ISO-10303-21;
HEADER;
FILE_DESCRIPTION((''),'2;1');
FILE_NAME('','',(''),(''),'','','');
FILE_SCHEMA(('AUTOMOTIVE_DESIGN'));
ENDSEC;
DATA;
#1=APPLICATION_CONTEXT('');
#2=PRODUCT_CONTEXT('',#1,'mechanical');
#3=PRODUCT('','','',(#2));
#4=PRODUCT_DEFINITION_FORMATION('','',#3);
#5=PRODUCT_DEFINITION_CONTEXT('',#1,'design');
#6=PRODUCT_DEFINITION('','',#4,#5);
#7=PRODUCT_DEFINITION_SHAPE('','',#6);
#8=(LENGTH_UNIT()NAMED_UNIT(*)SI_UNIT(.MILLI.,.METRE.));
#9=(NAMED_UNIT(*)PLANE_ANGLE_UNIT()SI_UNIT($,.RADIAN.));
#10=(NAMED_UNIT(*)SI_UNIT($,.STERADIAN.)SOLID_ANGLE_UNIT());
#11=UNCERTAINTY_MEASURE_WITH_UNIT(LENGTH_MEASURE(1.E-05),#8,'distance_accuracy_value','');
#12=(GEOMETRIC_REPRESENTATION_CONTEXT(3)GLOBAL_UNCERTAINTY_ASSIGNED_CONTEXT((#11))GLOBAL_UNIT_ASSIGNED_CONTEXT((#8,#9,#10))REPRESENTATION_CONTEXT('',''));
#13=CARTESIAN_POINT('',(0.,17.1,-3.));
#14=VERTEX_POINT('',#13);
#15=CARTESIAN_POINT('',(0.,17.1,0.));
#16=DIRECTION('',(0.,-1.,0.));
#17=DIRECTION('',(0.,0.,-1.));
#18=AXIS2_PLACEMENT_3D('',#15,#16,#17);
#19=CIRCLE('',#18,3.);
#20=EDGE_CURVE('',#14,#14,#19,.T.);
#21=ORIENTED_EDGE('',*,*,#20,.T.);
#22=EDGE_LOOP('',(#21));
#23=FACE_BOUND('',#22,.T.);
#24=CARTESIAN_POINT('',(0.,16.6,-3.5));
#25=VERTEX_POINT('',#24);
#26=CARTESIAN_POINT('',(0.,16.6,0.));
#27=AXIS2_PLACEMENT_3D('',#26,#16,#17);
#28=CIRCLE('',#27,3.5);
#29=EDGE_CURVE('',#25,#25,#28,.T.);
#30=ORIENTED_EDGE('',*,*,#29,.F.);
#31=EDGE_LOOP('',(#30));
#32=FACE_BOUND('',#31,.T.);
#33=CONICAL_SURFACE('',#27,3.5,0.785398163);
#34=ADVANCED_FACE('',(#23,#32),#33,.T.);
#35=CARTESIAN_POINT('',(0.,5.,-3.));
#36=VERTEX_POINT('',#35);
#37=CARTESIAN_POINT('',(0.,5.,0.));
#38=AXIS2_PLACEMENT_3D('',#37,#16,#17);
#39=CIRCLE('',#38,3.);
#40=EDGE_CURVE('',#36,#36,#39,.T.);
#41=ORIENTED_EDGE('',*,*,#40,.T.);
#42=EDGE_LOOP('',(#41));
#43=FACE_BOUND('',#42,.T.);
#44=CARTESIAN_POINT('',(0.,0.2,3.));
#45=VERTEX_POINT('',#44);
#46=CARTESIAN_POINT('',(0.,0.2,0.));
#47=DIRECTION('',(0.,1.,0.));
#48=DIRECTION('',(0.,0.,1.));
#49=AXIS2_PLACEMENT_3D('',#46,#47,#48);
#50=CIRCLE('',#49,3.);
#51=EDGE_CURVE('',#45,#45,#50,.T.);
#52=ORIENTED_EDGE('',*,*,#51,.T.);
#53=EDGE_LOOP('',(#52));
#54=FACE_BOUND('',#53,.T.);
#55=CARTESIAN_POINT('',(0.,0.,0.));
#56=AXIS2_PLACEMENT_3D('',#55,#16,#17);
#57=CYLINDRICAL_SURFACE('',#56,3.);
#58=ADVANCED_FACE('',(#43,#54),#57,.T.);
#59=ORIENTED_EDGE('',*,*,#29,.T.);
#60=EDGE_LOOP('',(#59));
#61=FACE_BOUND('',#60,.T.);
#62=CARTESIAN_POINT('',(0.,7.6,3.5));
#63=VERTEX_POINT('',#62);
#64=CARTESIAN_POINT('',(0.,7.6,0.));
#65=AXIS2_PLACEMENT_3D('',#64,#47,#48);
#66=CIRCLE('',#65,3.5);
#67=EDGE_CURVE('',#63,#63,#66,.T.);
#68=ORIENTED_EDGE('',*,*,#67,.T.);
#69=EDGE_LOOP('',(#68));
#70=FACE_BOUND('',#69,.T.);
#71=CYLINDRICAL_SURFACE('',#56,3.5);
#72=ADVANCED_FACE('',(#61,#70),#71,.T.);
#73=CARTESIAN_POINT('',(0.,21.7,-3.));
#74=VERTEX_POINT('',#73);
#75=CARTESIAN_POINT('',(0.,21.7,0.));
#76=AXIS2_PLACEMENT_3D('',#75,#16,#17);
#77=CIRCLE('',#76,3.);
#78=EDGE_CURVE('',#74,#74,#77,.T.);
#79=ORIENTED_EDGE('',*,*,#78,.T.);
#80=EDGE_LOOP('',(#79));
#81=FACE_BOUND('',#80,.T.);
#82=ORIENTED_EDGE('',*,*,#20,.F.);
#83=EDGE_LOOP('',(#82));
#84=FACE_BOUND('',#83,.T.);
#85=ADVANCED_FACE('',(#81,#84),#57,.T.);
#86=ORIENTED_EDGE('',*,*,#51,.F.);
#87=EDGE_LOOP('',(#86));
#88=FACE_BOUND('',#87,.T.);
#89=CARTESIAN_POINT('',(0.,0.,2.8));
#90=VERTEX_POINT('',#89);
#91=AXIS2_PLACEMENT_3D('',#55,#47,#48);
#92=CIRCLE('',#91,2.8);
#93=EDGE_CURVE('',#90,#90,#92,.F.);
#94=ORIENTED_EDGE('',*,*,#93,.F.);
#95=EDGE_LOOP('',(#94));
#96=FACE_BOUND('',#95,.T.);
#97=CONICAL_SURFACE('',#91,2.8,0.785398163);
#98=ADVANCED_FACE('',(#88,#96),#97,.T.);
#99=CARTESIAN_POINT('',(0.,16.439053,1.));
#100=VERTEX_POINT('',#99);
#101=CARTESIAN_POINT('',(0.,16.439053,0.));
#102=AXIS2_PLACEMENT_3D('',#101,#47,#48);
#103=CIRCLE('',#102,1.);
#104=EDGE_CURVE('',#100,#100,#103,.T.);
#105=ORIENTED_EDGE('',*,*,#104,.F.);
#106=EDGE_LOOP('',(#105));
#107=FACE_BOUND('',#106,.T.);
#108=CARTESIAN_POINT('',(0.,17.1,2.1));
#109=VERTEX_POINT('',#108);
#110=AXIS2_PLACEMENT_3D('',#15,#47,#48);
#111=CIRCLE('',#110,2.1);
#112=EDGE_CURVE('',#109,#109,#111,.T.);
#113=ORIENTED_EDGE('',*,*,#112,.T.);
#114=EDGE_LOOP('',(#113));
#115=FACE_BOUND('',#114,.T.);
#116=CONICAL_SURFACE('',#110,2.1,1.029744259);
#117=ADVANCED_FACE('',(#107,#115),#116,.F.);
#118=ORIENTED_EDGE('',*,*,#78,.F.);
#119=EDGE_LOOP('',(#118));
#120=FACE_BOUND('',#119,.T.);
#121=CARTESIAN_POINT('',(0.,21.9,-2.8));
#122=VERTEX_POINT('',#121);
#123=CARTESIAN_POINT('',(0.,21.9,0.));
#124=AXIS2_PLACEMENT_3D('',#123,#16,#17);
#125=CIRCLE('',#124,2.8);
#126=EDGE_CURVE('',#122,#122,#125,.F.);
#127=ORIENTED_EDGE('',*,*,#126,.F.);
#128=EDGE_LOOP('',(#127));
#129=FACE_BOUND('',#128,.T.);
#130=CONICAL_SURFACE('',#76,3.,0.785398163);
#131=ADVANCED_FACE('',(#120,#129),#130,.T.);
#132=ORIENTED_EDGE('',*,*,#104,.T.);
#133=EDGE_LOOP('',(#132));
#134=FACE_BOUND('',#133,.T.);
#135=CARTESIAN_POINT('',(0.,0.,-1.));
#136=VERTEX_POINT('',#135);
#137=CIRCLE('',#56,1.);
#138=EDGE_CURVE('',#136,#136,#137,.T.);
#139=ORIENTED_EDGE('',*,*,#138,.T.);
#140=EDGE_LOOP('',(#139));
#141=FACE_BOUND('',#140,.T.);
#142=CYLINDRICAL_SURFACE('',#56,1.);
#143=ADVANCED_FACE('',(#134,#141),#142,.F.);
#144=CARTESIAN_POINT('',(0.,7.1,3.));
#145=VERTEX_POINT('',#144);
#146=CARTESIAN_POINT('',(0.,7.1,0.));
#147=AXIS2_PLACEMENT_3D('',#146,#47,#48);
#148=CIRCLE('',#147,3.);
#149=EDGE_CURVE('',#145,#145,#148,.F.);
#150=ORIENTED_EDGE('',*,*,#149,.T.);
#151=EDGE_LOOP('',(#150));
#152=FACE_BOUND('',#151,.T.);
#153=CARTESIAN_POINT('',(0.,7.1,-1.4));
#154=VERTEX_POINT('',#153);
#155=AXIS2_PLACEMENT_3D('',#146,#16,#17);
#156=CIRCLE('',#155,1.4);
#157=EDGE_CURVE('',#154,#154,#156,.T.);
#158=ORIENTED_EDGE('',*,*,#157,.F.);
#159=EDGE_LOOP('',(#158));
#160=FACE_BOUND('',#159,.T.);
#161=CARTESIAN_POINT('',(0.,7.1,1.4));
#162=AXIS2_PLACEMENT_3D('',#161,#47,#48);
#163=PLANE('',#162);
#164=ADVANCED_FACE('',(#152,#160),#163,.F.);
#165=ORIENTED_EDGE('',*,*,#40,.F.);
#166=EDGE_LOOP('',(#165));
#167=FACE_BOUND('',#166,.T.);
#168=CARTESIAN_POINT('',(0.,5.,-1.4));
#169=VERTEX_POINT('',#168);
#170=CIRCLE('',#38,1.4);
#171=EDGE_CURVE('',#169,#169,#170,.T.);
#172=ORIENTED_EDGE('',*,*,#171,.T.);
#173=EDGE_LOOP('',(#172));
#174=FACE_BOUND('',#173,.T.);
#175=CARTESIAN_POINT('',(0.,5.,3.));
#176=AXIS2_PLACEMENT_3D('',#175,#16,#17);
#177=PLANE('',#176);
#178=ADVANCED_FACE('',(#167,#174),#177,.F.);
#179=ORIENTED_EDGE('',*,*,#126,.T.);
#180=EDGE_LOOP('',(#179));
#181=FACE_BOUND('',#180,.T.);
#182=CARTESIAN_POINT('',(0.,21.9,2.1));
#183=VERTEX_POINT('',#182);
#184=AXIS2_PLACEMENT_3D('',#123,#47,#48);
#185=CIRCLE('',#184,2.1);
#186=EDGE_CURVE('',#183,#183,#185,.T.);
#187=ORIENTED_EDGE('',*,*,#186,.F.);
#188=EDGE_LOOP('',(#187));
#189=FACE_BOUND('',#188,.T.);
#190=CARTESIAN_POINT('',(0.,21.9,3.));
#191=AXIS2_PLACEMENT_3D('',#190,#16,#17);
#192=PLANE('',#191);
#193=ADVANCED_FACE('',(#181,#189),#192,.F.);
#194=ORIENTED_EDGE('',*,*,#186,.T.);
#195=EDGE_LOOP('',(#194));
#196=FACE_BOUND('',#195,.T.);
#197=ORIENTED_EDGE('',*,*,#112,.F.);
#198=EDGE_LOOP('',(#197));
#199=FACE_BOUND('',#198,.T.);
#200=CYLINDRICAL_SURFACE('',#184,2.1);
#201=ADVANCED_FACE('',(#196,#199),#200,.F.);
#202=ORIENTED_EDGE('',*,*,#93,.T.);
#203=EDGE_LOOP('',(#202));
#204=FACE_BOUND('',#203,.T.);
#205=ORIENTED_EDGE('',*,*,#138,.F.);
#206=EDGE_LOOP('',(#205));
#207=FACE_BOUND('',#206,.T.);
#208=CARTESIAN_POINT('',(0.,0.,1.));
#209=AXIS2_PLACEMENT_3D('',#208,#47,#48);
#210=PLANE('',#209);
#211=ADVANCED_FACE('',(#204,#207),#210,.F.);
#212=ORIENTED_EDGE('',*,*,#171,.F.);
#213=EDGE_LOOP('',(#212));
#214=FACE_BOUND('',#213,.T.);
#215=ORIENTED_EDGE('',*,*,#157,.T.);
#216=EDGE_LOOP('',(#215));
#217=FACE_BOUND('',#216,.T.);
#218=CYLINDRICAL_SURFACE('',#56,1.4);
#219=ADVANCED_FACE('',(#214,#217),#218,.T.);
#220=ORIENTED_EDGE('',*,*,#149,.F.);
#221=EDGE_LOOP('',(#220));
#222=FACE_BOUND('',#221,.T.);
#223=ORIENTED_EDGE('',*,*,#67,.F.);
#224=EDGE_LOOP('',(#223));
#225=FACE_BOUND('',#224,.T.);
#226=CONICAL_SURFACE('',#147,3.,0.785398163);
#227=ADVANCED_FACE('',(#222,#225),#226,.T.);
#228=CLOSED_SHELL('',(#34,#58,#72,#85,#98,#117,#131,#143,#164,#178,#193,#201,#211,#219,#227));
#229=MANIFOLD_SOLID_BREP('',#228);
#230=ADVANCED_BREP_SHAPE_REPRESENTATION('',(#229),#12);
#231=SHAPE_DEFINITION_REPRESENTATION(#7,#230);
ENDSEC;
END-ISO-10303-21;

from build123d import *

# Parameters (mm, degrees)
HOLE_WIZARD_1_D     = 4.2
HOLE_WIZARD_1_DEPTH = 4.8
HOLE_WIZARD_1_TIP   = 1.2618073
CHAMFER_1_SIZE      = 0.2
CHAMFER_2_SIZE      = 0.5


with BuildPart() as part:
    # Эскиз1 → Повернуть1 (revolve)
    with BuildSketch(Plane(origin=(0, 0, 0), x_dir=(0, 0, -1), z_dir=(1, 0, 0)), mode=Mode.PRIVATE) as revolve_1_sk:
        Polygon((-1, 21.9), (-1, 0), (-3, 0), (-3, 5), (-1.4, 5), (-1.4, 7.1), (-3.5, 7.1), (-3.5, 17.1), (-3, 17.1), (-3, 21.9), align=None)
    revolve(revolve_1_sk.sketch.rotate(Axis((0, 0, 0), (0, 1, 0)), 180), axis=Axis((0, 0, 0), (0, 1, 0)))

    # Отверстие1
    with Locations(Plane(origin=(0, 21.9, 0), x_dir=(-1, 0, 0), z_dir=(0, 1, 0))):
        with Locations((0, 0)):
            Hole(HOLE_WIZARD_1_D / 2, depth=HOLE_WIZARD_1_DEPTH)
            with Locations((0, 0, -(HOLE_WIZARD_1_DEPTH + HOLE_WIZARD_1_TIP / 2))):  # 118° drill point
                Cone(0, HOLE_WIZARD_1_D / 2, HOLE_WIZARD_1_TIP, mode=Mode.SUBTRACT)

    # Фаска1
    chamfer_1_edges = [part.edges().sort_by_distance(p)[0] for p in [
        (0, 0, 3),
        (0, 21.9, 3),
    ]]
    chamfer(chamfer_1_edges, length=CHAMFER_1_SIZE)

    # Фаска2
    chamfer_2_edges = [part.edges().sort_by_distance(p)[0] for p in [
        (0, 17.1, 3.5),
        (0, 7.1, 3.5),
    ]]
    chamfer(chamfer_2_edges, length=CHAMFER_2_SIZE - 0.0001)  # a hair under: the kernel refuses the full size


solid = part.part
